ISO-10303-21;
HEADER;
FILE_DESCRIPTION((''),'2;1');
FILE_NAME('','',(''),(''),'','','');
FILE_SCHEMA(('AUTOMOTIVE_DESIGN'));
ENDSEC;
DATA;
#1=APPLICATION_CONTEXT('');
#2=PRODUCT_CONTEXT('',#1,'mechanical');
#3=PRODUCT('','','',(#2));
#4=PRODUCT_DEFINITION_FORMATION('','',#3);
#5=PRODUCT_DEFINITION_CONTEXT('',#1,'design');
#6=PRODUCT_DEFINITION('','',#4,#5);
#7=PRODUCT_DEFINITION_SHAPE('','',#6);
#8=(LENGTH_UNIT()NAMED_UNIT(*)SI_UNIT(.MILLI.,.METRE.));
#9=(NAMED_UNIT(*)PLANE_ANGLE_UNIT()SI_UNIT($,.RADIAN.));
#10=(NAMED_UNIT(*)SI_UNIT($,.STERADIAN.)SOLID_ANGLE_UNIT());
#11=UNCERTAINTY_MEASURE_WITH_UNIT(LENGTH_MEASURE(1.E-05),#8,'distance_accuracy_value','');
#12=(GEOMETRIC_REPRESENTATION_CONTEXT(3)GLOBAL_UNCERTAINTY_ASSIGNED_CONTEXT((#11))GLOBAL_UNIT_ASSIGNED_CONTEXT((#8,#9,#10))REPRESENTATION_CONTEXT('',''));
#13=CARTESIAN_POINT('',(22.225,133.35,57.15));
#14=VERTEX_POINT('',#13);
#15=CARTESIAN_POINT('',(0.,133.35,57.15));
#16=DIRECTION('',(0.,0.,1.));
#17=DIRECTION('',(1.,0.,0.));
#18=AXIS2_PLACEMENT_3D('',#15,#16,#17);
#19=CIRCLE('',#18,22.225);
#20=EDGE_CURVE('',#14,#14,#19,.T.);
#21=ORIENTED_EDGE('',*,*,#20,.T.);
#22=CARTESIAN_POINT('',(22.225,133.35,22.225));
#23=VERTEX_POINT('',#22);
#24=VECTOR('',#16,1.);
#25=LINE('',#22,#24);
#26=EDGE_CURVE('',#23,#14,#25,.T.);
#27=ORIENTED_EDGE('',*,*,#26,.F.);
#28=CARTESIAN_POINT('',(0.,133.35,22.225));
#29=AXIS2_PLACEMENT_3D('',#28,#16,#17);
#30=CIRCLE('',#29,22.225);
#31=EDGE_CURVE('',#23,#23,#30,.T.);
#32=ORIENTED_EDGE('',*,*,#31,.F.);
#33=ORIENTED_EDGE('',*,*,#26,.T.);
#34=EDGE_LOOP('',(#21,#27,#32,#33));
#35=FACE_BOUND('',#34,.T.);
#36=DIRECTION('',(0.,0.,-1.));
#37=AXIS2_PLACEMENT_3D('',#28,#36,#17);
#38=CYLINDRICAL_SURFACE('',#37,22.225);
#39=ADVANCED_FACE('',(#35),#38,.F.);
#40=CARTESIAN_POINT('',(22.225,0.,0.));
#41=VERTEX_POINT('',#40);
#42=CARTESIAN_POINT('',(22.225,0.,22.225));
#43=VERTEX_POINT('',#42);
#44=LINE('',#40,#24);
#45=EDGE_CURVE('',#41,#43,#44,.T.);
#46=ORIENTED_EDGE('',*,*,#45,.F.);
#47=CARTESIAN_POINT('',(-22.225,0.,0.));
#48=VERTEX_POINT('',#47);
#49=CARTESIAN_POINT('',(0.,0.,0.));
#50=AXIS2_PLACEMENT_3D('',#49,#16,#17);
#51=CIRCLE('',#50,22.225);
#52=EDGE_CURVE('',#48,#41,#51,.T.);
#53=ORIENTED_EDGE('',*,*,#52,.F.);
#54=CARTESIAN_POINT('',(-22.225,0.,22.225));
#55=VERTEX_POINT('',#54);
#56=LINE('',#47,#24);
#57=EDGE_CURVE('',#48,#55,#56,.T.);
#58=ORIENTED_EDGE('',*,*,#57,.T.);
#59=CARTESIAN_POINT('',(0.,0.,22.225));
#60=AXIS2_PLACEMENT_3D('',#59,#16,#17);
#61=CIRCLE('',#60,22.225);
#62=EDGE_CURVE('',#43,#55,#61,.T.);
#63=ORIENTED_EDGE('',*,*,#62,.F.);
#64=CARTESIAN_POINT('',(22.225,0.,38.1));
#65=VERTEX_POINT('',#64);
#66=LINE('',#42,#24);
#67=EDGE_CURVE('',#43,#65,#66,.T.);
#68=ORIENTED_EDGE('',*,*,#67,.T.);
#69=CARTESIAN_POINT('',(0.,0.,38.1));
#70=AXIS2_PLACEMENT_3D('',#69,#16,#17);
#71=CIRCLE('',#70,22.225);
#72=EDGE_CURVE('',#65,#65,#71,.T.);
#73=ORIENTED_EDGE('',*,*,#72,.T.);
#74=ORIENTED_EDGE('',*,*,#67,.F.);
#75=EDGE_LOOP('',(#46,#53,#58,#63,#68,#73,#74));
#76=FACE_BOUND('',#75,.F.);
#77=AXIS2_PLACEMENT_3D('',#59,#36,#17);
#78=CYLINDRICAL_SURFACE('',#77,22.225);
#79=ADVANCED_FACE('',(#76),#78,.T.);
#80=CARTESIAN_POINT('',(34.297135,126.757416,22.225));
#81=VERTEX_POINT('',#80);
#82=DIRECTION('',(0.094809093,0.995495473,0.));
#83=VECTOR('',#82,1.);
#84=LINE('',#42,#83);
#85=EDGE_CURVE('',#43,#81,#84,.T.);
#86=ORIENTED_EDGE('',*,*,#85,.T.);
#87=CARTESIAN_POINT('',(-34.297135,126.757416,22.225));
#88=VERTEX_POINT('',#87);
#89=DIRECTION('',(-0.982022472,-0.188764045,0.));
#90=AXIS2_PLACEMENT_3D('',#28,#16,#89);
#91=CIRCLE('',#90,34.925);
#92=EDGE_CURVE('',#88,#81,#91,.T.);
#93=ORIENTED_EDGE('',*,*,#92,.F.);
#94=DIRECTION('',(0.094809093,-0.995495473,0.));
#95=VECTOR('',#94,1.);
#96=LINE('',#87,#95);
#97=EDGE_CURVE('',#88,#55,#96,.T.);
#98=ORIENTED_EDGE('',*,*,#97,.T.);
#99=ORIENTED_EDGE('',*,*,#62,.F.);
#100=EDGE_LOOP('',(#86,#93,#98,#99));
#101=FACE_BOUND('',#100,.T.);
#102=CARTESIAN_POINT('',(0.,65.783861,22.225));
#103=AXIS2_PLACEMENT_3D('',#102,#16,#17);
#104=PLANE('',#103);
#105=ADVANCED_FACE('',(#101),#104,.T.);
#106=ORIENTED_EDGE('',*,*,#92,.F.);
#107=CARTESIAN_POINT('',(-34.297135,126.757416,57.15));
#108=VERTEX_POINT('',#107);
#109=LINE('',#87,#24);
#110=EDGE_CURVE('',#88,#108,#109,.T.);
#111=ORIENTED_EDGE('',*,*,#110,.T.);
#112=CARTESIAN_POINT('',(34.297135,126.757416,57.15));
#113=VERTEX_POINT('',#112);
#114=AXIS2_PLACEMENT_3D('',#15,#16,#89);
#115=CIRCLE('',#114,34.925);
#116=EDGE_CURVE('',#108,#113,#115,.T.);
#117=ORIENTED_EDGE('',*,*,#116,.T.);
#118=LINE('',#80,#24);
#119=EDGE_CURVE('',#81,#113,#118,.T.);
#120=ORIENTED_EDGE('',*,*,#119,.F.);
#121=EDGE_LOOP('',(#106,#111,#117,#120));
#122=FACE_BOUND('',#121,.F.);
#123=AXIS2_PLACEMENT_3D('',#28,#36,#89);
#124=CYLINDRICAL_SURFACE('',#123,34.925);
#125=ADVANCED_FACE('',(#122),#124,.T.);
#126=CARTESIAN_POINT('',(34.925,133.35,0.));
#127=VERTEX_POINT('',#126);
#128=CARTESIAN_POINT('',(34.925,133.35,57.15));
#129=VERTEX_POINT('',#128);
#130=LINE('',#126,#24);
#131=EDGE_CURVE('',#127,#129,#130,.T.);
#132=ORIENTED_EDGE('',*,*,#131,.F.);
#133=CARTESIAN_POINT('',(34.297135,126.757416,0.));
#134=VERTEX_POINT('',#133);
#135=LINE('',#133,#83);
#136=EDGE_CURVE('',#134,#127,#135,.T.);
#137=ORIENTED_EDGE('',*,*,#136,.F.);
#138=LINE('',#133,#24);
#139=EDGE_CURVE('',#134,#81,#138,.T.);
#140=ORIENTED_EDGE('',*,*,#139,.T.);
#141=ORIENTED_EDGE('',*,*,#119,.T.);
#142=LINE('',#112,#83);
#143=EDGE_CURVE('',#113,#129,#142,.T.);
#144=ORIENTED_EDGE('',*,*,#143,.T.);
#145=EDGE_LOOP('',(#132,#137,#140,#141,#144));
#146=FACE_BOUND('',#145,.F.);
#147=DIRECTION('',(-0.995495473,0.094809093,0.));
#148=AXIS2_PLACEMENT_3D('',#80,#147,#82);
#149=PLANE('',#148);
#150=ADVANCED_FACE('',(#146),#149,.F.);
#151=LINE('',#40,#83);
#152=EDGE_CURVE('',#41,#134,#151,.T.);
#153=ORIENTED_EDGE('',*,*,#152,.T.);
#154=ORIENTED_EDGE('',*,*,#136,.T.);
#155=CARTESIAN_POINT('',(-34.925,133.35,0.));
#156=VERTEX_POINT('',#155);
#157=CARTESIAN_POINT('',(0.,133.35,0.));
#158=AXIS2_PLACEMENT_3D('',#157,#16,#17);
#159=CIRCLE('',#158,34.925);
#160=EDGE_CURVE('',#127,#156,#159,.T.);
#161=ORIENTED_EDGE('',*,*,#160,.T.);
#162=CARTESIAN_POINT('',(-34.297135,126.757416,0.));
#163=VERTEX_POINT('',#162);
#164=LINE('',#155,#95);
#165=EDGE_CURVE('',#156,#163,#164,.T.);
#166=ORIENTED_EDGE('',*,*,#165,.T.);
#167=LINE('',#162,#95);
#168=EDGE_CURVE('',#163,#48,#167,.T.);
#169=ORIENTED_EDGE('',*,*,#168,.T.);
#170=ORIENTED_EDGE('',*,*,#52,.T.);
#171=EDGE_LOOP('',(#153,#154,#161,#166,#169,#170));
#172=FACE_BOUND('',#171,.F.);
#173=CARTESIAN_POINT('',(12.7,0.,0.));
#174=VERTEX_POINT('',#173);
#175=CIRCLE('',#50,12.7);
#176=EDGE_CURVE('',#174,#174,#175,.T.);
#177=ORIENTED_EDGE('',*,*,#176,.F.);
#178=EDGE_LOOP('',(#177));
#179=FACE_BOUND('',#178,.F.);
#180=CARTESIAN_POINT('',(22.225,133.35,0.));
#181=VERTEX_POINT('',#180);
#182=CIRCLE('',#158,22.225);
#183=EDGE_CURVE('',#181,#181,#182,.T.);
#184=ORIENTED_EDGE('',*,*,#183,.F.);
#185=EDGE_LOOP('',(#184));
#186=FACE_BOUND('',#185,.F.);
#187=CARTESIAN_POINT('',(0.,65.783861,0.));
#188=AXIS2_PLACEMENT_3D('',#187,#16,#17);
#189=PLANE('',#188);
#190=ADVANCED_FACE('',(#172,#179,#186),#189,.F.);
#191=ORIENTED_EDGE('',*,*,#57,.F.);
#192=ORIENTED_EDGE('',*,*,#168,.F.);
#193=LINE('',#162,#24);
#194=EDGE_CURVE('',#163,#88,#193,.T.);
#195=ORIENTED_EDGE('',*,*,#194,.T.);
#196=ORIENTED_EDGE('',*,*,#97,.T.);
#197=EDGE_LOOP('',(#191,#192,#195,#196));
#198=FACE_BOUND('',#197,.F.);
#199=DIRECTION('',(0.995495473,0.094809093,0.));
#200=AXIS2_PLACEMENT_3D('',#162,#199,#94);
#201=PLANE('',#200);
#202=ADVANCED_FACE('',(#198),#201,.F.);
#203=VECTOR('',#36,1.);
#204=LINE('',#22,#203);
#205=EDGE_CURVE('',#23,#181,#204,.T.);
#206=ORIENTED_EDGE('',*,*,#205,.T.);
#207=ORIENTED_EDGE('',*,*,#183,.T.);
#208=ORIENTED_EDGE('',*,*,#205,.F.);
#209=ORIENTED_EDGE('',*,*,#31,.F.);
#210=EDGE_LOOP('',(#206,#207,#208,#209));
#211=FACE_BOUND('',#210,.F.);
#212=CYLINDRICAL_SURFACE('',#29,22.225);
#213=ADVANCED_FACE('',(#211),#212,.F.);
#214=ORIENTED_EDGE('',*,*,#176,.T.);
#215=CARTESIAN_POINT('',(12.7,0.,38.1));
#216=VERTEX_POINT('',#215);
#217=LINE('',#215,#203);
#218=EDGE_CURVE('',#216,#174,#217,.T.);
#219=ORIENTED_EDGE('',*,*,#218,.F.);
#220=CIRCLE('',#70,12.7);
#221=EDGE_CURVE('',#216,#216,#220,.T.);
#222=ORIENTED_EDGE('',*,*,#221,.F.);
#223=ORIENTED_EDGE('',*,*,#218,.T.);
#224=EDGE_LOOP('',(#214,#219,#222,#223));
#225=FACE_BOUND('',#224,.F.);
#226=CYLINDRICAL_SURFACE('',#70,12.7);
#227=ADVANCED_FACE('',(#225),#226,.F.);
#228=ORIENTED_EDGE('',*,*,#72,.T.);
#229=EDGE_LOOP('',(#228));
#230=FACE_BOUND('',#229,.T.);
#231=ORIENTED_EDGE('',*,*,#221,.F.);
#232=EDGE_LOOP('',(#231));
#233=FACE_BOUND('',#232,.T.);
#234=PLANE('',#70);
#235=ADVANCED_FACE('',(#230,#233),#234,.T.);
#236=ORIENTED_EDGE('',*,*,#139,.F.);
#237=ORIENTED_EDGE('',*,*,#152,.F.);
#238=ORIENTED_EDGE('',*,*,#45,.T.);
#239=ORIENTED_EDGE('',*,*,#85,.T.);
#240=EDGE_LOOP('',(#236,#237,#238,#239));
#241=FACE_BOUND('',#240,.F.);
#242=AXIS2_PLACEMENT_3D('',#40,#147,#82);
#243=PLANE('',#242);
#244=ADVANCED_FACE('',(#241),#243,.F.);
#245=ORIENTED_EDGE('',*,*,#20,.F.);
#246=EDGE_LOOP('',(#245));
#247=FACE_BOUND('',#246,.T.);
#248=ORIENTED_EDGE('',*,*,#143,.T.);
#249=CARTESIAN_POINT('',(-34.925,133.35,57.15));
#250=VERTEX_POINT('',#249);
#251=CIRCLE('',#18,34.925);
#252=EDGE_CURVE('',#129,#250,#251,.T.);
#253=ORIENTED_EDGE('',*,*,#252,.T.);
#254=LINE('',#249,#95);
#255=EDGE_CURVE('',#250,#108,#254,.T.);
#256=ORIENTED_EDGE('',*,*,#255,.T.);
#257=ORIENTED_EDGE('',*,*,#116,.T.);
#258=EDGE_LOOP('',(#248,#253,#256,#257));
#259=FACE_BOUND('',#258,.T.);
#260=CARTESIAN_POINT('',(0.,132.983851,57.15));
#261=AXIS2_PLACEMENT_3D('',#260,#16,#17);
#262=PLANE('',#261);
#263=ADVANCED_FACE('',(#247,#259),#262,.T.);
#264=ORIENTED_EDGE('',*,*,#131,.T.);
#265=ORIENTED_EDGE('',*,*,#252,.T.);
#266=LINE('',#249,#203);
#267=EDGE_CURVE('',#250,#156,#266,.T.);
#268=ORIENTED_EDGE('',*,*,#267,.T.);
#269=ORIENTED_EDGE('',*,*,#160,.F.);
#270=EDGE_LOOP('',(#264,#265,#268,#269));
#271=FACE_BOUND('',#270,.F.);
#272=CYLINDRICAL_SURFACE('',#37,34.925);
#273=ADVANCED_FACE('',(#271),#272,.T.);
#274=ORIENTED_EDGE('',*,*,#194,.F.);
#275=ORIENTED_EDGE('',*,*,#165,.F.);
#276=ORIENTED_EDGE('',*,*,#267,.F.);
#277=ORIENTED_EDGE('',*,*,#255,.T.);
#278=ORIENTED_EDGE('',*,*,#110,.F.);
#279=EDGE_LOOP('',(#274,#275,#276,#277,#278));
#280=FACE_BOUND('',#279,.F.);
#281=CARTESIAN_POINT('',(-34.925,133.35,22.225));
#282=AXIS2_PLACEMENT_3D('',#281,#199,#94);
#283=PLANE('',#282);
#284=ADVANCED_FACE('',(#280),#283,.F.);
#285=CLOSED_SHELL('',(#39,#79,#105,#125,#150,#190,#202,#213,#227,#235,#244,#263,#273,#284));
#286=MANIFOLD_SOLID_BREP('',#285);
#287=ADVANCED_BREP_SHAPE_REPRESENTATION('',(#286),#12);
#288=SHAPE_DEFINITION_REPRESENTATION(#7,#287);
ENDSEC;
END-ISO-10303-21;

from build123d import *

# Parameters (mm, degrees)
F0_R     = 22.225
F0_R_2   = 12.7
F1_DEPTH = 22.225
F2_R     = 22.225
F3_DEPTH = 34.925
F4_DEPTH = 50.8
F5_R     = 12.7
F6_DEPTH = 15.875
F7_R     = 12.7
F8_DEPTH = 38.1


# Not quite as in the source:
# - a length typed as a fraction of an inch, garbled in the dataset ("3 / 203.2 mm" for 3/8 in), is restored


with BuildPart() as f1:
    # F0 (on Top) → F1 (new body)
    with BuildSketch(Plane.XY):
        with BuildLine():
            Line((22.225, 0), (34.2971348315, 126.7574157303))
            ThreePointArc((34.2971348315, 126.7574157303), (0, 98.425), (-34.2971348315, 126.7574157303))
            Line((-34.2971348315, 126.7574157303), (-22.225, 0))
            ThreePointArc((-22.225, 0), (0, 22.225), (22.225, 0))
        make_face()
        with BuildLine():
            Line((34.2971348315, 126.7574157303), (34.925, 133.35))
            ThreePointArc((34.925, 133.35), (0, 168.275), (-34.925, 133.35))
            Line((-34.925, 133.35), (-34.2971348315, 126.7574157303))
            ThreePointArc((-34.2971348315, 126.7574157303), (0, 98.425), (34.2971348315, 126.7574157303))
        make_face()
        with Locations((0, 133.35)):
            Circle(F0_R, mode=Mode.SUBTRACT)
        with BuildLine():
            ThreePointArc((-22.225, 0), (0, -22.225), (22.225, 0))
            ThreePointArc((22.225, 0), (0, 22.225), (-22.225, 0))
        make_face()
        Circle(F0_R_2, mode=Mode.SUBTRACT)
        with Locations((0, 133.35)):
            Circle(F0_R)
        Circle(F0_R_2)
    extrude(amount=F1_DEPTH)

    # F2 (on face) → F3 (join)
    with BuildSketch(Plane.XY.offset(22.225)):
        with BuildLine():
            ThreePointArc((-34.2971348315, 126.7574157303), (0, 98.425), (34.2971348315, 126.7574157303))
            Line((34.2971348315, 126.7574157303), (34.925, 133.35))
            ThreePointArc((34.925, 133.35), (0, 168.275), (-34.925, 133.35))
            Line((-34.925, 133.35), (-34.2971348315, 126.7574157303))
        make_face()
        with Locations((0, 133.35)):
            Circle(F2_R, mode=Mode.SUBTRACT)
    extrude(amount=F3_DEPTH)

    # F4 (cut): a face of the model
    f4_faces = [f1.faces().sort_by_distance(p)[0] for p in [
        (0, 133.35, 22.225),
    ]]
    extrude(f4_faces, amount=-F4_DEPTH, mode=Mode.SUBTRACT)

    # F5 (on face) → F6 (join)
    with BuildSketch(Plane.XY.offset(22.225)):
        with BuildLine():
            ThreePointArc((-22.225, 0), (0, -22.225), (22.225, 0))
            ThreePointArc((22.225, 0), (0, 22.225), (-22.225, 0))
        make_face()
        Circle(F5_R, mode=Mode.SUBTRACT)
        Circle(F5_R)
    extrude(amount=F6_DEPTH)

    # F7 (on face) → F8 (cut)
    with BuildSketch(Plane.XY.offset(38.1)):
        Circle(F7_R)
    extrude(amount=-F8_DEPTH, mode=Mode.SUBTRACT)


solid = f1.part
